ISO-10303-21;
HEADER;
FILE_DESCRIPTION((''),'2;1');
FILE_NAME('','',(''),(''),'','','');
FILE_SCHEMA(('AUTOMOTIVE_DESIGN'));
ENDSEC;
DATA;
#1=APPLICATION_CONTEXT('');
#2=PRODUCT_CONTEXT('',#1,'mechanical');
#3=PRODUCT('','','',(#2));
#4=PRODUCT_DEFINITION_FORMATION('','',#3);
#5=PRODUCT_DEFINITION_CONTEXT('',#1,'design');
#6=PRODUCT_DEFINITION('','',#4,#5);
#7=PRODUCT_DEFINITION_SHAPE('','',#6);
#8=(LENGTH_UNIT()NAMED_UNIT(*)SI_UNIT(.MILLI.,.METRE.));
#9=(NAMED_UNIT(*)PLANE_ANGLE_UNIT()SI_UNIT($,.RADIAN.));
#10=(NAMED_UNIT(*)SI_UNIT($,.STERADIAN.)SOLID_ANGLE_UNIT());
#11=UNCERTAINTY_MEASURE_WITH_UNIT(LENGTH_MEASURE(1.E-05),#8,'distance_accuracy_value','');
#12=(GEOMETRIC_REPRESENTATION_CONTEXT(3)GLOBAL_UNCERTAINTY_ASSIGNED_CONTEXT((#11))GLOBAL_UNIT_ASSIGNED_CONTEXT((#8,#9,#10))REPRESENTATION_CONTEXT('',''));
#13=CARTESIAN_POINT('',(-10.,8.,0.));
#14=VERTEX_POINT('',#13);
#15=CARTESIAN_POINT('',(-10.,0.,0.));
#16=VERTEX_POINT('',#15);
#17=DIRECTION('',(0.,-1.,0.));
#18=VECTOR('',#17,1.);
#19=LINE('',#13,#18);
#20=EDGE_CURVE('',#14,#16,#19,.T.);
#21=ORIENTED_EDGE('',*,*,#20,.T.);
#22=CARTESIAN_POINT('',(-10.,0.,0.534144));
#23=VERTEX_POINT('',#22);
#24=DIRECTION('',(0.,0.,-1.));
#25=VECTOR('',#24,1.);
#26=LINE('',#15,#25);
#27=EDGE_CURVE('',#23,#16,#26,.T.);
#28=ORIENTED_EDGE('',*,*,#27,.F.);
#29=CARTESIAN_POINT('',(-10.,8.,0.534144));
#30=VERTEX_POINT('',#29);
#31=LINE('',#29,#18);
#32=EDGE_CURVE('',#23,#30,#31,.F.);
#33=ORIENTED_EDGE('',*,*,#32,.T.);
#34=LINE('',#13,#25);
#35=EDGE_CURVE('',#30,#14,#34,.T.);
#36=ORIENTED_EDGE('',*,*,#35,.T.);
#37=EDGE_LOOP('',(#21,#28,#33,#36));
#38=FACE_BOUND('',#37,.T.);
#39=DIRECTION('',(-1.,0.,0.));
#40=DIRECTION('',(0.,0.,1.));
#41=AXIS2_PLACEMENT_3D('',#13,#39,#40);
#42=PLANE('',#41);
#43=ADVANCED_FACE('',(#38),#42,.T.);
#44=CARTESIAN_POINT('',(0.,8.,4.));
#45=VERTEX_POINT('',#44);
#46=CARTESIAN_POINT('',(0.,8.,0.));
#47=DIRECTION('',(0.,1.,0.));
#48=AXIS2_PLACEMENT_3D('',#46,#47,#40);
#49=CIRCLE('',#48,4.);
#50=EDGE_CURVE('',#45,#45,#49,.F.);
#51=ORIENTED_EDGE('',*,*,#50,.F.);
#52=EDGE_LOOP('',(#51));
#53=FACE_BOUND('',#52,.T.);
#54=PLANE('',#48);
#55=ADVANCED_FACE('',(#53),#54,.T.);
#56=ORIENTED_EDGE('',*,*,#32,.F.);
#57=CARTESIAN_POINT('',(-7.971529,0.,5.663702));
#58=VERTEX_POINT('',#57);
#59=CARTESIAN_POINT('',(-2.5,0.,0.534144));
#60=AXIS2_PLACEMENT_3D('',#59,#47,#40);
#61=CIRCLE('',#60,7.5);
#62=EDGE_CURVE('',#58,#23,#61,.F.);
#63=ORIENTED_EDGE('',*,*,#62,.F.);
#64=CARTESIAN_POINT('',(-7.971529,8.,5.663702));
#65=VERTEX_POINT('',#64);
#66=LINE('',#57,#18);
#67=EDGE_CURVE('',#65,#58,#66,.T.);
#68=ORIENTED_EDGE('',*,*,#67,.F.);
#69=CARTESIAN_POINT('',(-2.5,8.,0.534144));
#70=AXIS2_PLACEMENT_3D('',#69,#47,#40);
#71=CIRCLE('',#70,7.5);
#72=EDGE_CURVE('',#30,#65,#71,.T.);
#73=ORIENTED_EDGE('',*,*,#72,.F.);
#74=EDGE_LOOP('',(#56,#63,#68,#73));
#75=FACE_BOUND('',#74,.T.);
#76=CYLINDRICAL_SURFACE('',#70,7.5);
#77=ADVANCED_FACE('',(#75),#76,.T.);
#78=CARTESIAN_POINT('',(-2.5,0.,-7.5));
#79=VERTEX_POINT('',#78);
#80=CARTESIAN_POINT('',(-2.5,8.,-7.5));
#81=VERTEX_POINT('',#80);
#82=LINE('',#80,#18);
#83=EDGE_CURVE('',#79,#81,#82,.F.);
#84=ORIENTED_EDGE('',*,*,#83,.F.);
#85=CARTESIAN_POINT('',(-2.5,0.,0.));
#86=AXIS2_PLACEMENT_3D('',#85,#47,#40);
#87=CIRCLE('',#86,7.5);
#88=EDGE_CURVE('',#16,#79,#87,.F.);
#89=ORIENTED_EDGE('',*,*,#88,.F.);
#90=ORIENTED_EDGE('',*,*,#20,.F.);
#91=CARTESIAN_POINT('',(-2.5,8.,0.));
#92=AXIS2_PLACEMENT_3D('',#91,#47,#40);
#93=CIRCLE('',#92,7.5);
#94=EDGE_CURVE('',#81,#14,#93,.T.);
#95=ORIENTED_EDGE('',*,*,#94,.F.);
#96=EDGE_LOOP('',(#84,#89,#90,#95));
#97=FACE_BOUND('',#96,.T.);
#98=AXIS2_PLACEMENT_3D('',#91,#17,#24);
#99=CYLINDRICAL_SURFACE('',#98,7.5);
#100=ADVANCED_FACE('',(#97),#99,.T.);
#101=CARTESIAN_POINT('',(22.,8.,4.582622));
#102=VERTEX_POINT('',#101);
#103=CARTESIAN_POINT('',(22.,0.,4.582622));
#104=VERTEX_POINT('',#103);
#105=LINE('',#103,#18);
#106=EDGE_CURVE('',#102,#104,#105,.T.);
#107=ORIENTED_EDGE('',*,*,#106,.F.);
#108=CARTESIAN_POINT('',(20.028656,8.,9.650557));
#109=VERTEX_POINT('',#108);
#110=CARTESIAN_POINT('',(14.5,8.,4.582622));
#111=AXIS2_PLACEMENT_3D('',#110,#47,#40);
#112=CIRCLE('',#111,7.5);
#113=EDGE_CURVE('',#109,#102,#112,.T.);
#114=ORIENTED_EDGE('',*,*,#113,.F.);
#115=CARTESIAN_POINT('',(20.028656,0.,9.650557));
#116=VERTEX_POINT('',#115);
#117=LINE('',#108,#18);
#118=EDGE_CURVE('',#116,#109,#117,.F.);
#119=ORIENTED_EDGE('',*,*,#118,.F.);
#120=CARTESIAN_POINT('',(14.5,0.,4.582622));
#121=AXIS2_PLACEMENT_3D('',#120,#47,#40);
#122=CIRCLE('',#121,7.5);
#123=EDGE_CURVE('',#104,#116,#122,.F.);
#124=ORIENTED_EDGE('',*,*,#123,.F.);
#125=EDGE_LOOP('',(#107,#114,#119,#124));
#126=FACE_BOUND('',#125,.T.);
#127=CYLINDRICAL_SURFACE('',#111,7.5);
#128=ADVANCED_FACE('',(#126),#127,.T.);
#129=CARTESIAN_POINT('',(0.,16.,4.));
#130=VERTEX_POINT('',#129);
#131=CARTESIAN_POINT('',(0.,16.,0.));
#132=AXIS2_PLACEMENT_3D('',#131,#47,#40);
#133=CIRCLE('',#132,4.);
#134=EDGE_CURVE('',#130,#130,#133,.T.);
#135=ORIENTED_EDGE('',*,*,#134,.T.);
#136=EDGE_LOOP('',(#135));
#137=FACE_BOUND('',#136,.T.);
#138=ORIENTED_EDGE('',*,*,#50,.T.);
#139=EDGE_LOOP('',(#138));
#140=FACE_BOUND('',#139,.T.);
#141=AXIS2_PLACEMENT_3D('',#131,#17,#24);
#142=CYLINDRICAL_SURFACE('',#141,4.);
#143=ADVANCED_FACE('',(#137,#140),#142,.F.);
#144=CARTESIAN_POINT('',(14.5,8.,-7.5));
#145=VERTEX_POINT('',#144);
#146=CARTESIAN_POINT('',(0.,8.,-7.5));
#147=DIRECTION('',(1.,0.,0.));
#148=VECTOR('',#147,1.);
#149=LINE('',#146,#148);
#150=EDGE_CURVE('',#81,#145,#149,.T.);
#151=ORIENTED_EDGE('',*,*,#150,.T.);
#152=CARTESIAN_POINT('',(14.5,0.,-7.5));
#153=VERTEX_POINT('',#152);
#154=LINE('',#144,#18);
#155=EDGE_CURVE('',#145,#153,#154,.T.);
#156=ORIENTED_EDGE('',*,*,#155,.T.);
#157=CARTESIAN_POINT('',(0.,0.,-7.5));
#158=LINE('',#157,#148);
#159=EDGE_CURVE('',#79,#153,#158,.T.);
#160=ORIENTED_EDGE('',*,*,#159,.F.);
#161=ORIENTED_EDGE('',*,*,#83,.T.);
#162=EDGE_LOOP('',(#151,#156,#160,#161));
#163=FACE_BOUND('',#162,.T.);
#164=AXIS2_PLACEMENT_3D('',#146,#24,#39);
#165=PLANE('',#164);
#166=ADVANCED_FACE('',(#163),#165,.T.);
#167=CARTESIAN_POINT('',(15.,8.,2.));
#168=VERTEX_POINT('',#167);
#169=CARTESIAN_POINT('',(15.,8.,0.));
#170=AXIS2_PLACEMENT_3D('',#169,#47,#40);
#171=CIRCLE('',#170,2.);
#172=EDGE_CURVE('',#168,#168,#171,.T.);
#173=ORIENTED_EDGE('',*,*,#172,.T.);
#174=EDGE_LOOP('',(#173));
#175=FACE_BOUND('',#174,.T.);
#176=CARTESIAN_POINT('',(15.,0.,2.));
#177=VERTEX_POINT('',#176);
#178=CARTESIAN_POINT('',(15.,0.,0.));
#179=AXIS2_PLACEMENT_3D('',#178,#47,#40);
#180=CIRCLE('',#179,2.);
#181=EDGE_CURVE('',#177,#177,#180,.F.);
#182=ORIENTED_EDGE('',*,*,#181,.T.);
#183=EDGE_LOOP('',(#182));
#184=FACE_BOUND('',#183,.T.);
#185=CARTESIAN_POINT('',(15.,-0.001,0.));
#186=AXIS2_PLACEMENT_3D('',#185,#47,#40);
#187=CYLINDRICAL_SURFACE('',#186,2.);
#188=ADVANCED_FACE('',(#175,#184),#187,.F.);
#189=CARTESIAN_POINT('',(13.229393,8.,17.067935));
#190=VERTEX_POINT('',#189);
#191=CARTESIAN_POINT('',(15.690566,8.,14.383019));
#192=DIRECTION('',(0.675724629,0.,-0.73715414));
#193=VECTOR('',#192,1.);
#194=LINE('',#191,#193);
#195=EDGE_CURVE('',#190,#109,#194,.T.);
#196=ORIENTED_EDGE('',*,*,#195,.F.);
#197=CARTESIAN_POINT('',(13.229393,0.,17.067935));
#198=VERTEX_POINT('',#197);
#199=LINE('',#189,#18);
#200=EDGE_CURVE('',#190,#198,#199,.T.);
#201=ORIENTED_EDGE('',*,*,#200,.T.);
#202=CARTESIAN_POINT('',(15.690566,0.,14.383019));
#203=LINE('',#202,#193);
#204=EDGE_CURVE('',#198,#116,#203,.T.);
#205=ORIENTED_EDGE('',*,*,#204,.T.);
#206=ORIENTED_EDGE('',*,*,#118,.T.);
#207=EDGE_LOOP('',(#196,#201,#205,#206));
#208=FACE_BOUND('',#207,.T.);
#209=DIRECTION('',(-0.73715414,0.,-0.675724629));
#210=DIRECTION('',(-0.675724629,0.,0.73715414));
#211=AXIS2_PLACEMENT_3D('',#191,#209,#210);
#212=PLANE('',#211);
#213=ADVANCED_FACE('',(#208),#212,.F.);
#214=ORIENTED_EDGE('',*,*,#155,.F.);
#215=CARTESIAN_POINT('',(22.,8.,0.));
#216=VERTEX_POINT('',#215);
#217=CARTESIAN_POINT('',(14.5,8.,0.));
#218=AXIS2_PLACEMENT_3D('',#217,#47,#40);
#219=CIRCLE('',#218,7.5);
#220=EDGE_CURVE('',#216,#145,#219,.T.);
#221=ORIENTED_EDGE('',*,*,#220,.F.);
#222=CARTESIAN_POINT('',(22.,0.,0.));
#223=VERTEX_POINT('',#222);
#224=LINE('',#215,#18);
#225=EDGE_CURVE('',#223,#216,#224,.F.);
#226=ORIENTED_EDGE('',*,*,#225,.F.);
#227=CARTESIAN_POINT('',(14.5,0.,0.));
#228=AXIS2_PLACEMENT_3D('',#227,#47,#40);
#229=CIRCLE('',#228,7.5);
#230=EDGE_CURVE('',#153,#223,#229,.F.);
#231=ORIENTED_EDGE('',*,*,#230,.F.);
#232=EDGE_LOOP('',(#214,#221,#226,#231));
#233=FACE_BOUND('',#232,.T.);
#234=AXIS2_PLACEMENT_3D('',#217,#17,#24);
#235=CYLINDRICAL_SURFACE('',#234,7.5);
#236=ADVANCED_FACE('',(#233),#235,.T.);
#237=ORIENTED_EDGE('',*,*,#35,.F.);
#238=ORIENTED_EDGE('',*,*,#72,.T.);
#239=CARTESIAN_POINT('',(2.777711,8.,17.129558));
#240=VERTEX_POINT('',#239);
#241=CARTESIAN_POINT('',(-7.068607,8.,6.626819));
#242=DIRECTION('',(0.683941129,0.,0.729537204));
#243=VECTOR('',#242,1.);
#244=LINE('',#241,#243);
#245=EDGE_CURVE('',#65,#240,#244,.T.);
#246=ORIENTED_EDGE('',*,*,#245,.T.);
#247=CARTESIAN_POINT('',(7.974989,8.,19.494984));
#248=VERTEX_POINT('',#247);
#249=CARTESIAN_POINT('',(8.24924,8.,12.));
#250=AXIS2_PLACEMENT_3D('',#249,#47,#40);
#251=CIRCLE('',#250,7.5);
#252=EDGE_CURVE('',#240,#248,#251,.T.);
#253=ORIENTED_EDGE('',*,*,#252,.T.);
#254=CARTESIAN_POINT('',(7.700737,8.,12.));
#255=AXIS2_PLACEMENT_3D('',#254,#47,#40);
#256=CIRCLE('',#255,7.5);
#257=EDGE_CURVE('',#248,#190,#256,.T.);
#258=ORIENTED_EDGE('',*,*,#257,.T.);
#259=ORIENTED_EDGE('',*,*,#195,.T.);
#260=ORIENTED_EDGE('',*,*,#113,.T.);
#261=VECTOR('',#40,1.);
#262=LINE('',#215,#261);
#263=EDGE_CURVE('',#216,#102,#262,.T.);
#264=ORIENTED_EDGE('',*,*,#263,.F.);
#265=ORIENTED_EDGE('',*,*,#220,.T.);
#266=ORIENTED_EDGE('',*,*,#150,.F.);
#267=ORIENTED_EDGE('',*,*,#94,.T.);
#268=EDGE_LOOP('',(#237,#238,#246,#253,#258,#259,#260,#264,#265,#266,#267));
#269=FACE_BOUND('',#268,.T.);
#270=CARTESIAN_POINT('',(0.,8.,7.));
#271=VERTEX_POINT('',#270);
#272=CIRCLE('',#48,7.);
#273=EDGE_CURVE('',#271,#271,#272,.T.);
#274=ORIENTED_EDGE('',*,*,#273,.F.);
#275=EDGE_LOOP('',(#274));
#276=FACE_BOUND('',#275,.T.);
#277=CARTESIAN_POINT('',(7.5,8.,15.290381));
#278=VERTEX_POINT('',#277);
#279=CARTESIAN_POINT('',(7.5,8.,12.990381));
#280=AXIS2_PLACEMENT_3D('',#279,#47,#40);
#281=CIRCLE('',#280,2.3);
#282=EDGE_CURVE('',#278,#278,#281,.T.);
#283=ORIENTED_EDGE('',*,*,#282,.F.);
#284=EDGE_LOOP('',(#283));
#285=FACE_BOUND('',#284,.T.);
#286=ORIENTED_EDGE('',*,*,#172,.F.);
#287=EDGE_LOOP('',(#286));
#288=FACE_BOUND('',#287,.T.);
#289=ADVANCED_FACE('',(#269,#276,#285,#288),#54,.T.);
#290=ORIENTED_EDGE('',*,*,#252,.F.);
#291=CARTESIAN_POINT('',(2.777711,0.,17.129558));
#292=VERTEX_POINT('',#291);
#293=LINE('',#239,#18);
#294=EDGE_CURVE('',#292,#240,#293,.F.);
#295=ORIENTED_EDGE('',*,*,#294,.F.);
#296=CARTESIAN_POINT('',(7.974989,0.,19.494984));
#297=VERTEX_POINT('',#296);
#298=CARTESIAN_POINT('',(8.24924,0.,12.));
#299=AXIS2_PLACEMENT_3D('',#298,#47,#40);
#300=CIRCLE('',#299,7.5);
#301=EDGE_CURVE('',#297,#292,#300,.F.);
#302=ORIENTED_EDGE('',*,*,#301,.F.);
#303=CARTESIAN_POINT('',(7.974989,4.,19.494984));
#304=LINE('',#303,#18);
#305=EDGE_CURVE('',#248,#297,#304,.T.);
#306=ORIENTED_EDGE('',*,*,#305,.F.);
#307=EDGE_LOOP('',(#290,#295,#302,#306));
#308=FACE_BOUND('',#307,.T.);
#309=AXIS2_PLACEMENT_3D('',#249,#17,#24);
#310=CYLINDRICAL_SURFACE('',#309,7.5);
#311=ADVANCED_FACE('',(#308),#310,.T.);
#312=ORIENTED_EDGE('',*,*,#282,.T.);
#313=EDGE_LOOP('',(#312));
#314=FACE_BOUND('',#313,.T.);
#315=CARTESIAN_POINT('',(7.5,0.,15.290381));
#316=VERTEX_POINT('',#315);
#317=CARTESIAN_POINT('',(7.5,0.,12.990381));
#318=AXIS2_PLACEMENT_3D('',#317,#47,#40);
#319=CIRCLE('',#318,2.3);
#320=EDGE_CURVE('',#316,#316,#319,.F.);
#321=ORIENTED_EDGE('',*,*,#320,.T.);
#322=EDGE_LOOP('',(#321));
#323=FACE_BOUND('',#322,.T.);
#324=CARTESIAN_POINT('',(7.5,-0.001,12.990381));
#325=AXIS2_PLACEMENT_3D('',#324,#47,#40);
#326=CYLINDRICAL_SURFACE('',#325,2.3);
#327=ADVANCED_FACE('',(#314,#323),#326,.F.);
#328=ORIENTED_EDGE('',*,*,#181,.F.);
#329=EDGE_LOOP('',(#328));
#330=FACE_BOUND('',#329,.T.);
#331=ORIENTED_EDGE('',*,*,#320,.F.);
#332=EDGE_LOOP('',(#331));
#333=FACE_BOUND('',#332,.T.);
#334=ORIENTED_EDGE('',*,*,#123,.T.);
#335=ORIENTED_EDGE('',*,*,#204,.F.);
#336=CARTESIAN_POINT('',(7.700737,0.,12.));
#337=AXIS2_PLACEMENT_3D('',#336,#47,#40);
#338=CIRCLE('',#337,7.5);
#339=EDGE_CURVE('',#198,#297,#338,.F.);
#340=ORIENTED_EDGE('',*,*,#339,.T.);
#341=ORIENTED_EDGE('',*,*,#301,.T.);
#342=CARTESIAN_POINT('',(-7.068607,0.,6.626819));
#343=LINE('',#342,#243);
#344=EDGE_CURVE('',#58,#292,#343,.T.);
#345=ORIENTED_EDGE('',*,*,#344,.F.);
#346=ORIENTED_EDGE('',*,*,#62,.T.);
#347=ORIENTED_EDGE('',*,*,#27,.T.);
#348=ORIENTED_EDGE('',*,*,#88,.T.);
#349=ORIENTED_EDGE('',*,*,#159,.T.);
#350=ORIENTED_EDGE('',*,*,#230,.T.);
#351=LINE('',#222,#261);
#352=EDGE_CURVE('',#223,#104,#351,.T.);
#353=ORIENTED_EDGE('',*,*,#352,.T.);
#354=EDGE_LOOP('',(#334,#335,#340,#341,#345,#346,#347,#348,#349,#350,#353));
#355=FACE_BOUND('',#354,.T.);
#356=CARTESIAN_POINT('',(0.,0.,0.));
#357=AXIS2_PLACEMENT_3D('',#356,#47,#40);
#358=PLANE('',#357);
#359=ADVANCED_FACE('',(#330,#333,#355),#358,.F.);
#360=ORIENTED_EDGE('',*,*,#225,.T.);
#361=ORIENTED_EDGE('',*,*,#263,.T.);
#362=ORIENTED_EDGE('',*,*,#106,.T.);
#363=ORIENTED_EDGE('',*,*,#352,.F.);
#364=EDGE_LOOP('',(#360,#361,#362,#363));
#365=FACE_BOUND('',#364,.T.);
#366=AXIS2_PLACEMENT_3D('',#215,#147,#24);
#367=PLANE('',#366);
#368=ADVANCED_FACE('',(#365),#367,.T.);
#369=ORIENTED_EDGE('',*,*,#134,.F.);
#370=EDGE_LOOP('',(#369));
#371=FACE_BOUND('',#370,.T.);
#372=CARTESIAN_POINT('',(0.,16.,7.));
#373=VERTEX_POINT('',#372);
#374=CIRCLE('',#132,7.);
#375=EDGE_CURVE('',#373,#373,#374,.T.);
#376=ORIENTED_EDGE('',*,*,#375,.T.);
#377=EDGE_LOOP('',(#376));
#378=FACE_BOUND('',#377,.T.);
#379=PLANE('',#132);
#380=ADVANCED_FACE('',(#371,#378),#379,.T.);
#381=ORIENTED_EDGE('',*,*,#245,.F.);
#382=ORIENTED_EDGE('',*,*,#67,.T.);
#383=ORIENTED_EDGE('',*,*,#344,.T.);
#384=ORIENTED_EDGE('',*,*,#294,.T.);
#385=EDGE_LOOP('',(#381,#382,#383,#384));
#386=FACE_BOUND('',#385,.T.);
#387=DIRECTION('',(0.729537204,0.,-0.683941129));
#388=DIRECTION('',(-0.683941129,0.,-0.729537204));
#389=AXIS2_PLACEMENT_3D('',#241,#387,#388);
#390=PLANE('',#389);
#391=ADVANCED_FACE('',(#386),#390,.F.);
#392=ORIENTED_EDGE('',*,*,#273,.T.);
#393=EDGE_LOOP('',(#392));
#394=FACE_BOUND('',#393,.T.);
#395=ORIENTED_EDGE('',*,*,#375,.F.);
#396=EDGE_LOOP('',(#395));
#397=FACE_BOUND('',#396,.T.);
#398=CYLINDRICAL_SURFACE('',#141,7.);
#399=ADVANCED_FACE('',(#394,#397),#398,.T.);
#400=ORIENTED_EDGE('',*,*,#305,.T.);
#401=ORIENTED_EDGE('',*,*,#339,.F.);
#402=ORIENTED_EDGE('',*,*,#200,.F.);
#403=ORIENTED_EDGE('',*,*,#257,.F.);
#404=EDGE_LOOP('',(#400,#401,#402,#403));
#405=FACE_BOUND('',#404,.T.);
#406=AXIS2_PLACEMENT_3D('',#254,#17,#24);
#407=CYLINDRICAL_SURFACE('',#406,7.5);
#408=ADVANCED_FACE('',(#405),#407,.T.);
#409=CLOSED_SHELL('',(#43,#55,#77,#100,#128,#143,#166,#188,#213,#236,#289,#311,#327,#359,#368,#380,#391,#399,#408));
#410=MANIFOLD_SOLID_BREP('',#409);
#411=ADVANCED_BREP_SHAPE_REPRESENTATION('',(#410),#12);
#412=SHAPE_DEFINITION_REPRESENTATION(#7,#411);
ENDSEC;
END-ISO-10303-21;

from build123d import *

# Parameters (mm, degrees)
BOSS_EXTRU_1_DEPTH      = 8
CONG_1_R                = 7.5
ENL_V_MAT_EXTRU_1_REACH = 32.467
ESQUISSE2_R             = 2
ESQUISSE2_R_2           = 2.3
ESQUISSE3_R             = 7
ESQUISSE3_R_2           = 4
BOSS_EXTRU_2_DEPTH      = 8
CONG_2_R                = 7.5


with BuildPart() as part:
    # Esquisse1 → Boss.-Extru.1 (new body)
    with BuildSketch(Plane(origin=(0, 0, 0), x_dir=(1, 0, 0), z_dir=(0, 1, 0))):
        Polygon((-10, -3.5), (5, -19.5), (11, -19.5), (22, -7.5), (22, 7.5), (-10, 7.5), align=None)
    extrude(amount=BOSS_EXTRU_1_DEPTH)

    # Congé1
    cong_1_edges = [part.edges().sort_by_distance(p)[0] for p in [
        (-10, 4, -7.5),
        (22, 4, -7.5),
    ]]
    fillet(cong_1_edges, radius=CONG_1_R)

    # Esquisse2 → Enlèv. mat.-Extru.1 (cut, up to next)
    with BuildSketch(Plane(origin=(0, 8, 0), x_dir=(1, 0, 0), z_dir=(0, 1, 0)), mode=Mode.PRIVATE) as enl_v_mat_extru_1_sk1:
        with Locations(Location((15, 0, 0), (0, 0, 270))):
            Circle(ESQUISSE2_R)
    enl_v_mat_extru_1_tool1 = extrude(enl_v_mat_extru_1_sk1.sketch, amount=-ENL_V_MAT_EXTRU_1_REACH, mode=Mode.PRIVATE) & part.part
    # Esquisse2 → Enlèv. mat.-Extru.1 (cut, up to next)
    with BuildSketch(Plane(origin=(0, 8, 0), x_dir=(1, 0, 0), z_dir=(0, 1, 0)), mode=Mode.PRIVATE) as enl_v_mat_extru_1_sk2:
        with Locations(Location((7.5, -12.990381057, 0), (0, 0, 270))):
            Circle(ESQUISSE2_R_2)
    enl_v_mat_extru_1_tool2 = extrude(enl_v_mat_extru_1_sk2.sketch, amount=-ENL_V_MAT_EXTRU_1_REACH, mode=Mode.PRIVATE) & part.part
    add(enl_v_mat_extru_1_tool1.solids().sort_by_distance((15, 8, 0))[0], mode=Mode.SUBTRACT)
    add(enl_v_mat_extru_1_tool2.solids().sort_by_distance((7.5, 8, 12.990381))[0], mode=Mode.SUBTRACT)

    # Esquisse3 → Boss.-Extru.2 (add)
    with BuildSketch(Plane(origin=(0, 8, 0), x_dir=(1, 0, 0), z_dir=(0, 1, 0))):
        with Locations(Location((0, 0, 0), (0, 0, 270))):
            Circle(ESQUISSE3_R)
        with Locations(Location((0, 0, 0), (0, 0, 270))):
            Circle(ESQUISSE3_R_2, mode=Mode.SUBTRACT)
    extrude(amount=BOSS_EXTRU_2_DEPTH)

    # Congé2
    # the kernel refuses this fillet: 7.5 mm, written as the material it takes off along each edge
    with BuildSketch(Plane(origin=(22, -7.293444198, 7.5), x_dir=(-0.6757246285173467, 0, 0.7371541402007411), z_dir=(0, 1, 0))) as cong_2_piece_1:
        with BuildLine():
            CenterArc((CONG_2_R * 0.388983690555, -CONG_2_R), CONG_2_R, 90, 42.510447078)
            Line((-CONG_2_R * 0.286740937963, -CONG_2_R * 0.262845859799), (0, 0))
            Line((0, 0), (CONG_2_R * 0.388983690555, 0))
        make_face()
    extrude(amount=22.586888396, mode=Mode.SUBTRACT)
    with BuildSketch(Plane(origin=(11, -8.248157181, 19.5), x_dir=(-1, 0, 0), z_dir=(0, 1, 0))) as cong_2_piece_2:
        with BuildLine():
            CenterArc((CONG_2_R * 0.439901716342, -CONG_2_R), CONG_2_R, 90, 47.489552922)
            Line((-CONG_2_R * 0.297252423859, -CONG_2_R * 0.324275371483), (0, 0))
            Line((0, 0), (CONG_2_R * 0.439901716342, 0))
        make_face()
    extrude(amount=24.496314363, mode=Mode.SUBTRACT)
    with BuildSketch(Plane(origin=(5, -8.123100234, 19.5), x_dir=(-0.6839411288813303, 0, -0.7295372041400847), z_dir=(0, 1, 0))) as cong_2_piece_3:
        with BuildLine():
            CenterArc((CONG_2_R * 0.433232012466, -CONG_2_R), CONG_2_R, 90, 46.847610266)
            Line((-CONG_2_R * 0.296305191674, -CONG_2_R * 0.316058871119), (0, 0))
            Line((0, 0), (CONG_2_R * 0.433232012466, 0))
        make_face()
    extrude(amount=24.246200467, mode=Mode.SUBTRACT)
    with BuildSketch(Plane(origin=(-10, -7.414640249, 3.5), x_dir=(0, 0, -1), z_dir=(0, 1, 0))) as cong_2_piece_4:
        with BuildLine():
            CenterArc((CONG_2_R * 0.395447479964, -CONG_2_R), CONG_2_R, 90, 43.152389734)
            Line((-CONG_2_R * 0.288493648917, -CONG_2_R * 0.27046279586), (0, 0))
            Line((0, 0), (CONG_2_R * 0.395447479964, 0))
        make_face()
    extrude(amount=22.829280499, mode=Mode.SUBTRACT)


solid = part.part
